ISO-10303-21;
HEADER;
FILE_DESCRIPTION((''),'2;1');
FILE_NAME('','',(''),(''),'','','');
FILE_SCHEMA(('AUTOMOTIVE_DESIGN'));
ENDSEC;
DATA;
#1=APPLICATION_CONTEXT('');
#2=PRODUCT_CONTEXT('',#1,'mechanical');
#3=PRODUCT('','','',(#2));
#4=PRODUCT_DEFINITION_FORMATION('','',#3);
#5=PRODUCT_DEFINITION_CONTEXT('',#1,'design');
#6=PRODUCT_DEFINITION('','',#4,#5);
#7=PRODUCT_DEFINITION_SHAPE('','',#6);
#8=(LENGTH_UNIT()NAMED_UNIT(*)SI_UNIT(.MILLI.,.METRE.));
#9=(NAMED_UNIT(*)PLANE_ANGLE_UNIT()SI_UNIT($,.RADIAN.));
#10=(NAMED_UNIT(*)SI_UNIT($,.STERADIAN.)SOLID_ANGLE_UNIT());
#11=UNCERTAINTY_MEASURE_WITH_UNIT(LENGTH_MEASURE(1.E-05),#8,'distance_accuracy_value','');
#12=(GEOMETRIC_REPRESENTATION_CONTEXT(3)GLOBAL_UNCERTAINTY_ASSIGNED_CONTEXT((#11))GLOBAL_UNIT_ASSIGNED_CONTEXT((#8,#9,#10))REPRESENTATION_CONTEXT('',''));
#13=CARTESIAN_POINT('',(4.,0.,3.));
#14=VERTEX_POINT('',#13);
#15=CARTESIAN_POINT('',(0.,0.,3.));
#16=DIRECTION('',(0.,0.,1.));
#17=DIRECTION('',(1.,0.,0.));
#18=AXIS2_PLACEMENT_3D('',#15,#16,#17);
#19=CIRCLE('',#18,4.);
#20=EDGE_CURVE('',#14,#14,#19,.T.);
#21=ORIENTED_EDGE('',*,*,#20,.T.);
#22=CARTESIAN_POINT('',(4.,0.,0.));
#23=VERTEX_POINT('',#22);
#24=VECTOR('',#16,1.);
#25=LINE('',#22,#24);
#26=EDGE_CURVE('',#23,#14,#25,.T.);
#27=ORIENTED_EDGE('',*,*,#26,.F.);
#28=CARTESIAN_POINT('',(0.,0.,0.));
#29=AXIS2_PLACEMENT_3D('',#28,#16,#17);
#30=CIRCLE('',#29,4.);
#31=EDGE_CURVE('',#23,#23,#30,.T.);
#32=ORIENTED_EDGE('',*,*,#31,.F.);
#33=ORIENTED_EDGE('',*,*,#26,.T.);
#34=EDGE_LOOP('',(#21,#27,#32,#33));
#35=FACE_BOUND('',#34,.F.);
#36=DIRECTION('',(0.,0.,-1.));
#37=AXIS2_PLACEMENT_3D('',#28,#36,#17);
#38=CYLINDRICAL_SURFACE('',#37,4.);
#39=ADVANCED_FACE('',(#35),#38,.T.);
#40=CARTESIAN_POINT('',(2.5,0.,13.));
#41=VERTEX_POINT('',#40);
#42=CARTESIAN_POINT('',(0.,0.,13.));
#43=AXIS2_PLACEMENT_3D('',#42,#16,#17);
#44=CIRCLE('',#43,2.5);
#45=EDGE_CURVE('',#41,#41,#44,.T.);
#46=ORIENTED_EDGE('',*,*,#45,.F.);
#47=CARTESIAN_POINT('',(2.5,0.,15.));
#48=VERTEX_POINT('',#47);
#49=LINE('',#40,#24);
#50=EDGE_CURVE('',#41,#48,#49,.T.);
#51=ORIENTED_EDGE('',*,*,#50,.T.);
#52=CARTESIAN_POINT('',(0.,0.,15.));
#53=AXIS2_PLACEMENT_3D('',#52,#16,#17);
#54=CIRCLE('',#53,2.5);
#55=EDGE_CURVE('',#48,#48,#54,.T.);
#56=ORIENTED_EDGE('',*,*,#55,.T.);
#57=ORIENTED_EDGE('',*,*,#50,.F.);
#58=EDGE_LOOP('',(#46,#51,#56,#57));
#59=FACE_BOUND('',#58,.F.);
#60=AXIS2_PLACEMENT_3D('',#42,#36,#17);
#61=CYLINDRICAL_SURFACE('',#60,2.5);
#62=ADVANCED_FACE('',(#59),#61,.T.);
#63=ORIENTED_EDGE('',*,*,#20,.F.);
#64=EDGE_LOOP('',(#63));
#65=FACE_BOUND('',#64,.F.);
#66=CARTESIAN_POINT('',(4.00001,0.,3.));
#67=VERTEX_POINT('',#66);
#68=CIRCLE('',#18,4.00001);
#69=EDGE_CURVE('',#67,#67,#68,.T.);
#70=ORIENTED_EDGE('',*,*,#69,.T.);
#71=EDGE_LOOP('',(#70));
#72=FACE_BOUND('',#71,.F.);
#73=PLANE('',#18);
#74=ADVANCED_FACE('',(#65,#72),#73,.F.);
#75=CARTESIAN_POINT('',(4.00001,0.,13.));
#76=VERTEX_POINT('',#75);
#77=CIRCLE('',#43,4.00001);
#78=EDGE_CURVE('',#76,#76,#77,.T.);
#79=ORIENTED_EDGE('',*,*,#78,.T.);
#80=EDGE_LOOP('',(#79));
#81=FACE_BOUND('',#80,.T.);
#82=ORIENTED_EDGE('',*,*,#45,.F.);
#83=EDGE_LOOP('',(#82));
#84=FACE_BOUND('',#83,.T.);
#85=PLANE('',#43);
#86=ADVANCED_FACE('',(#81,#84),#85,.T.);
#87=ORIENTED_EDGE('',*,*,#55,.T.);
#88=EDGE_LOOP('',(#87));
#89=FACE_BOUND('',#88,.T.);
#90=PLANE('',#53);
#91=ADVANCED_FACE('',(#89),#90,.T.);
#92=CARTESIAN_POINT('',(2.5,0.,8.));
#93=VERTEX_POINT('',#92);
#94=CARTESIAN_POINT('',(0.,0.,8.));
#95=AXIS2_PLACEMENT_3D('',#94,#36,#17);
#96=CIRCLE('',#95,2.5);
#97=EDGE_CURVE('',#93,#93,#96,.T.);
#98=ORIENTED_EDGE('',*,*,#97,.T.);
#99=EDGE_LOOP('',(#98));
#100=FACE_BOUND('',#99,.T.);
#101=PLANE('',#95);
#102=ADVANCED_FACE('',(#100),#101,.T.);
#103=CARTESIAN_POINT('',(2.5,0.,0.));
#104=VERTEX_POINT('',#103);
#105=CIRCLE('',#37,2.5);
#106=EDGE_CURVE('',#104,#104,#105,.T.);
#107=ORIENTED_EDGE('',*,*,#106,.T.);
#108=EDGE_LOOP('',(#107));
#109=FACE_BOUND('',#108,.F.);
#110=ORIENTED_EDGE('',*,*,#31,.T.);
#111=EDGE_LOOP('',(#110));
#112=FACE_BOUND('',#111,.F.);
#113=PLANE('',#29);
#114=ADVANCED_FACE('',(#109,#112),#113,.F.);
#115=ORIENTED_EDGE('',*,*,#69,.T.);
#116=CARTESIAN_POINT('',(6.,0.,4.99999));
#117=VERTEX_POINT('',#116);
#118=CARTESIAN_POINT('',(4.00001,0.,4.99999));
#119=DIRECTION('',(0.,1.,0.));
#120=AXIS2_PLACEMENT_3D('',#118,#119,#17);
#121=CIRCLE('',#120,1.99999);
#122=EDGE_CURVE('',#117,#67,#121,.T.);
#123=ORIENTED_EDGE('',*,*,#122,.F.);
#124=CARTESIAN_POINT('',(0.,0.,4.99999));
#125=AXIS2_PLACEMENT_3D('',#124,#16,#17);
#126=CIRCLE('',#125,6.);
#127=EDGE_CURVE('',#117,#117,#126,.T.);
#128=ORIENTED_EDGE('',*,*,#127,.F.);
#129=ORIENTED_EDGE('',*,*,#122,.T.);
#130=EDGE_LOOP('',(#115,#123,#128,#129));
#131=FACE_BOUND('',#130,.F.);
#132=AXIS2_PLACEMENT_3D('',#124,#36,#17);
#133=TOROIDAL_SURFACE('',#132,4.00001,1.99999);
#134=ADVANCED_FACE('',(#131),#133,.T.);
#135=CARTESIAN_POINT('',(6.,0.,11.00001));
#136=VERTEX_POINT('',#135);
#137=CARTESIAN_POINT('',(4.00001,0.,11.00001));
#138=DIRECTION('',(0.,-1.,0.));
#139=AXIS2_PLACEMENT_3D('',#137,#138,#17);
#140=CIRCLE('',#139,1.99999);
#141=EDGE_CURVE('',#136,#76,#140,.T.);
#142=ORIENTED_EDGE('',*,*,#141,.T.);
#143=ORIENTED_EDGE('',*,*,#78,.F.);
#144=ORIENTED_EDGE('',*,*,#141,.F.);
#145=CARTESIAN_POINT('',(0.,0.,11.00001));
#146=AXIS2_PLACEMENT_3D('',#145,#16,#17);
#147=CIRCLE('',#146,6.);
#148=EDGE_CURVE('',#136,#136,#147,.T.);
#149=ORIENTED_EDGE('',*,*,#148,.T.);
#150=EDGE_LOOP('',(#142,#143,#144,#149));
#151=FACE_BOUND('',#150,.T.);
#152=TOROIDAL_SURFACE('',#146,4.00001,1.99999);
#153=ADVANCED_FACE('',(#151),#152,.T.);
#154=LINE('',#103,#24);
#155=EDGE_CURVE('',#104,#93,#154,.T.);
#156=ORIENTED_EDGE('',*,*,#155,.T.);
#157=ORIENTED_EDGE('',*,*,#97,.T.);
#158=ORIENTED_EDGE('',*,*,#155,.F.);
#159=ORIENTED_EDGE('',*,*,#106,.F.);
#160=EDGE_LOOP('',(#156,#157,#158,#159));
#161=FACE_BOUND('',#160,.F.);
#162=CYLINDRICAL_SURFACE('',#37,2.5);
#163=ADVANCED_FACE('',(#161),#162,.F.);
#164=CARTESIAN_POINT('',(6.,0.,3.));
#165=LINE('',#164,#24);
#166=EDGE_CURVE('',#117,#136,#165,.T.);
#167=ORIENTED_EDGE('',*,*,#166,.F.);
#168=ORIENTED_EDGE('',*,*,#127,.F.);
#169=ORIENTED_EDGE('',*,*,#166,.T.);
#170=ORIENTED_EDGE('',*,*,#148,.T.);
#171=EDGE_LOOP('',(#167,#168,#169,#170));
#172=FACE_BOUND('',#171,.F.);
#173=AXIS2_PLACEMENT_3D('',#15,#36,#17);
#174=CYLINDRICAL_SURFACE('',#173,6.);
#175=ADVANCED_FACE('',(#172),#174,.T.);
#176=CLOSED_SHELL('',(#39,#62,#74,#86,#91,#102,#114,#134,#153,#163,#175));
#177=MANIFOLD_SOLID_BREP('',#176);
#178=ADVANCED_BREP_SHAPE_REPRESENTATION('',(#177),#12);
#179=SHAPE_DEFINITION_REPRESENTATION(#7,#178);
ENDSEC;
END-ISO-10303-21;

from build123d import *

# Parameters (mm, degrees)
F0_R     = 4
F1_DEPTH = 3
F2_R     = 6
F3_DEPTH = 10
F4_R     = 2.5
F5_DEPTH = 2
F6_R     = 1.99999
F7_R     = 2.5
F8_DEPTH = 8


# Not quite as in the source:
# - a fillet or chamfer is up to 0.001 mm smaller than in the source, because OpenCascade refuses the exact size
# - a feature names something its author has since deleted; it is built from what else it names


with BuildPart() as f1:
    # F0 (on Top) → F1 (new body)
    with BuildSketch(Plane.XY):
        Circle(F0_R)
    extrude(amount=F1_DEPTH)

    # F2 (on face) → F3 (join)
    with BuildSketch(Plane.XY.offset(3)):
        Circle(F2_R)
    extrude(amount=F3_DEPTH)

    # F4 (on face) → F5 (join)
    with BuildSketch(Plane.XY.offset(13)):
        Circle(F4_R)
    extrude(amount=F5_DEPTH)

    # F6 (radius 2 in the source; OpenCascade refuses exactly that, so slightly less here)
    f6_edges = [f1.edges().sort_by_distance(p)[0] for p in [
        (-6, 0, 13),
        (-6, 0, 3),
    ]]
    fillet(f6_edges, radius=F6_R)

    # F7 (on face) → F8 (cut)
    with BuildSketch(Plane(origin=(0, 0, 0), x_dir=(1, 0, 0), z_dir=(0, 0, -1))):
        Circle(F7_R)
    extrude(amount=-F8_DEPTH, mode=Mode.SUBTRACT)


solid = f1.part
